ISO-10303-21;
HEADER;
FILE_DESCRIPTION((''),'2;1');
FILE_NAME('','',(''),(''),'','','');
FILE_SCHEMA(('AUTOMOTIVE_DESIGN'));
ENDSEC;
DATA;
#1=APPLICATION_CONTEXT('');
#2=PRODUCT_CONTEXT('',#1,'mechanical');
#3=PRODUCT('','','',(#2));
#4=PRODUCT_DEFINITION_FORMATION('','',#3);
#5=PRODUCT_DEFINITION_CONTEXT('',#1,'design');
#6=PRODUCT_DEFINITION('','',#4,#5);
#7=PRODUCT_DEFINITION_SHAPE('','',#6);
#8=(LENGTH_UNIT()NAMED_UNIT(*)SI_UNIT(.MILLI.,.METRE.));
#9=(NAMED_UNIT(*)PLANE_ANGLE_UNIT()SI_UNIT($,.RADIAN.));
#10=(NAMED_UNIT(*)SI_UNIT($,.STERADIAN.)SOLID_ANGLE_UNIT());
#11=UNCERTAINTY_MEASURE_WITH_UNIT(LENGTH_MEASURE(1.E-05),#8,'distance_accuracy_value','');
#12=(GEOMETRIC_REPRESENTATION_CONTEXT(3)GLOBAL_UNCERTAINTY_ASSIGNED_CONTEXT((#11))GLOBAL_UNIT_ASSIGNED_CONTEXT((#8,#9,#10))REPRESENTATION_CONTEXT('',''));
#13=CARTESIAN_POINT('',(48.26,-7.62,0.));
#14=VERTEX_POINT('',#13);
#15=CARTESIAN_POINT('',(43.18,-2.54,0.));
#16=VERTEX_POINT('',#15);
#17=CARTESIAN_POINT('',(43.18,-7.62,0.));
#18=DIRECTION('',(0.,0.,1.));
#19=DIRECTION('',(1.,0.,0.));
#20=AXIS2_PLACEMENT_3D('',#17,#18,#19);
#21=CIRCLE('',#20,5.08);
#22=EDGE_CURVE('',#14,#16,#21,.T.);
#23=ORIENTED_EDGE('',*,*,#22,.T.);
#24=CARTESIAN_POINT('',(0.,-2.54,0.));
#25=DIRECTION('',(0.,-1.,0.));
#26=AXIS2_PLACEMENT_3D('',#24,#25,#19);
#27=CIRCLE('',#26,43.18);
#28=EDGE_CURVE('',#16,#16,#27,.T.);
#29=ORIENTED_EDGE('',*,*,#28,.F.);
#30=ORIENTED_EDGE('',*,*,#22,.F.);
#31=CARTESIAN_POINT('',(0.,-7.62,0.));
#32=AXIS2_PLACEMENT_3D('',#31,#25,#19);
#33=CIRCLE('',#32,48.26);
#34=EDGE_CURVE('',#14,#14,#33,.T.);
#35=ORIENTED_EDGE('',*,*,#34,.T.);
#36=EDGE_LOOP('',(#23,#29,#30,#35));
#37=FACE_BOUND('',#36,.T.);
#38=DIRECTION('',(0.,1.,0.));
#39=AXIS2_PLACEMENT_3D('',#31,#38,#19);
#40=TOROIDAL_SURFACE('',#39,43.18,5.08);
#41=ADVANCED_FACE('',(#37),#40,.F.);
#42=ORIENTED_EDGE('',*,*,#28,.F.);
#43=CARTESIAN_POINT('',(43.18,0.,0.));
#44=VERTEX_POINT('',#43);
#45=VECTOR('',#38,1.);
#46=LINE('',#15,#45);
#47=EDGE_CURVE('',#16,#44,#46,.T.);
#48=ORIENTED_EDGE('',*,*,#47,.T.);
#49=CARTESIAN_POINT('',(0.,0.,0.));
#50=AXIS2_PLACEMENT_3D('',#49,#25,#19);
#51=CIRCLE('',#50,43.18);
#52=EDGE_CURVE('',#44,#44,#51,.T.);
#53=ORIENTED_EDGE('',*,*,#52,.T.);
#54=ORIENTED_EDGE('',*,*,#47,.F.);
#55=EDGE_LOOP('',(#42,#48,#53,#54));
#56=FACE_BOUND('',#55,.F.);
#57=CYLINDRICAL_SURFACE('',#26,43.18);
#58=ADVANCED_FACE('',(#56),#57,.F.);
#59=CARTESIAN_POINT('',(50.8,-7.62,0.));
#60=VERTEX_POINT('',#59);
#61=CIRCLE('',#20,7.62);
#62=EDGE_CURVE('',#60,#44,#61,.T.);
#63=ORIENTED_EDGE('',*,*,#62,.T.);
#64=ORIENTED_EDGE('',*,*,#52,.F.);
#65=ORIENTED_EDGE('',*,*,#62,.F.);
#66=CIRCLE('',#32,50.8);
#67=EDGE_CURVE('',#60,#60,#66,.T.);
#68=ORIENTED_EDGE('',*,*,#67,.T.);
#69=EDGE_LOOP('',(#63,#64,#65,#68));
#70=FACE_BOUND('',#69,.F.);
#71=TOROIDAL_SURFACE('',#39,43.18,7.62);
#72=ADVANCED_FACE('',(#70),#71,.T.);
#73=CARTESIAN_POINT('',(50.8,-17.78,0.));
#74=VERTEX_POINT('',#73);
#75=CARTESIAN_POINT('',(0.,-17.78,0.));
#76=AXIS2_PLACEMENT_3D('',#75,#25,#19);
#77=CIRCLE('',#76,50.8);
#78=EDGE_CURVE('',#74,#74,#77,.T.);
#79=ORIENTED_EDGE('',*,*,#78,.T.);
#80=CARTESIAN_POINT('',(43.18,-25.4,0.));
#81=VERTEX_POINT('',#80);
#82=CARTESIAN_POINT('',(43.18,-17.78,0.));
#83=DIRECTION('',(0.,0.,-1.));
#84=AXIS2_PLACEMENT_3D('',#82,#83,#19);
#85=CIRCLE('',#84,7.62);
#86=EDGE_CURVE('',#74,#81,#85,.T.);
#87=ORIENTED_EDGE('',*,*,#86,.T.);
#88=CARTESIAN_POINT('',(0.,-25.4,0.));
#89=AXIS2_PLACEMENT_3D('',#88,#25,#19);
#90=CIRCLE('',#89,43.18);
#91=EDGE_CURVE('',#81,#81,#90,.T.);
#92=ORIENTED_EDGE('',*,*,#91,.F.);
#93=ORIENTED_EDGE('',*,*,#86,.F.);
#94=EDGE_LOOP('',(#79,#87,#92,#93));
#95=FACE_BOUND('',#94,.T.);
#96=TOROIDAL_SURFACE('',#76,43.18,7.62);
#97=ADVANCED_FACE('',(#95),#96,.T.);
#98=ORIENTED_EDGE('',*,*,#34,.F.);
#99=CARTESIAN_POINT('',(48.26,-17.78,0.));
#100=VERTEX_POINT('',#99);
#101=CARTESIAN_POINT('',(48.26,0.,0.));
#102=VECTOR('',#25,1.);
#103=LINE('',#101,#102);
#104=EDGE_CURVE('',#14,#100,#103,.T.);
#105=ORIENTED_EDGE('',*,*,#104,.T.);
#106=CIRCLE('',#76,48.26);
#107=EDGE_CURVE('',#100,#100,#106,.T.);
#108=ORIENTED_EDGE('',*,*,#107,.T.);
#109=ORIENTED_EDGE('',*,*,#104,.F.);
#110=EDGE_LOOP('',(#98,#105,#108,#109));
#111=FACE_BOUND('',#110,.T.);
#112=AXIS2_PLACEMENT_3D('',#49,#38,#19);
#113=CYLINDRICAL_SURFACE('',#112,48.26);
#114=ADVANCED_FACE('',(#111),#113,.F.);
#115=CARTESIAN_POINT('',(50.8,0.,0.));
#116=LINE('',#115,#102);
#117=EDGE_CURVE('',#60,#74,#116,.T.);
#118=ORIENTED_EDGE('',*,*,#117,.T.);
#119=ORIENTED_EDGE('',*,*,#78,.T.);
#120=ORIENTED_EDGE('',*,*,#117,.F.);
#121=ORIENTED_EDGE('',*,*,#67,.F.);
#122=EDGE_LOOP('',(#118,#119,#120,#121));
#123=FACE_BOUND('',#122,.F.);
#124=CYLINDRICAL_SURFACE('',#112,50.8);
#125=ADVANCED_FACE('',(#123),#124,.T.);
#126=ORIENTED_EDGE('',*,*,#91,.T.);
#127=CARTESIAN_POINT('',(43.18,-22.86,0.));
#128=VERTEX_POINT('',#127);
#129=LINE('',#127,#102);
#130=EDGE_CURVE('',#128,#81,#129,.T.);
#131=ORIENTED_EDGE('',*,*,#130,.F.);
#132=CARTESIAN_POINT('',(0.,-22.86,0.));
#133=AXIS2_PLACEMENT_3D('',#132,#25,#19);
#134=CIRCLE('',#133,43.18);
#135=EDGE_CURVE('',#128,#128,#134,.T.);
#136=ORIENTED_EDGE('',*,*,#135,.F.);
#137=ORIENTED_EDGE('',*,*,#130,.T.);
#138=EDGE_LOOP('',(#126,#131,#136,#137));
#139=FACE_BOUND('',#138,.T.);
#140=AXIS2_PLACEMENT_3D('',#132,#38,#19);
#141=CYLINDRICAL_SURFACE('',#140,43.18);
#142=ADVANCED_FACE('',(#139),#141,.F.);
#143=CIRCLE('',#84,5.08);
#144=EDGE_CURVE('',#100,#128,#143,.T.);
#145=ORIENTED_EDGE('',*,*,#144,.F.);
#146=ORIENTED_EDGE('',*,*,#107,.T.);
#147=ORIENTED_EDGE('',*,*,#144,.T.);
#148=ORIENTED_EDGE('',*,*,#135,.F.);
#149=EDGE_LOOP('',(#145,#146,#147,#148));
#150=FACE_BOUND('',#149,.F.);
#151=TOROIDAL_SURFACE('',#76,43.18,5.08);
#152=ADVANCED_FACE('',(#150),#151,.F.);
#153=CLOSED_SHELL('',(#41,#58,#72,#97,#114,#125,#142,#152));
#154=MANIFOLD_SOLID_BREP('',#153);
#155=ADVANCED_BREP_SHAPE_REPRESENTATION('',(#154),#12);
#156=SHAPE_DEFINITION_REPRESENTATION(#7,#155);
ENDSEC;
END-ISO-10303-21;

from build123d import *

# Parameters (mm, degrees)
F0_R     = 50.8
F1_DEPTH = 25.4
F2_R     = 7.62
F3_T     = -2.54


# Not quite as in the source:
# - a shell that OpenCascade refuses in one call is made with other operations: the cavity is built on its own and cut out


with BuildPart() as f1:
    # F0 (on Front) → F1 (new body)
    with BuildSketch(Plane.XZ):
        Circle(F0_R)
    extrude(amount=F1_DEPTH)

    # F2
    f2_edges = [f1.edges().sort_by_distance(p)[0] for p in [
        (-50.8, -25.4, 0),
        (-50.8, 0, 0),
    ]]
    fillet(f2_edges, radius=F2_R)

    # F3: a shell. OpenCascade refuses it in one call, so the cavity is built on its own and cut out:
    # the body offset inwards by the wall thickness, plus a prism from it out through each open face.
    f3_core = offset(f1.part, amount=F3_T, mode=Mode.PRIVATE)
    f3_exits = [f3_core.faces().sort_by_distance(p)[0] for p in [
        (0, -22.86, 0),
        (0, -2.54, 0),
    ]]
    add(f3_core, mode=Mode.SUBTRACT)
    extrude(f3_exits, amount=-F3_T, mode=Mode.SUBTRACT)


solid = f1.part
